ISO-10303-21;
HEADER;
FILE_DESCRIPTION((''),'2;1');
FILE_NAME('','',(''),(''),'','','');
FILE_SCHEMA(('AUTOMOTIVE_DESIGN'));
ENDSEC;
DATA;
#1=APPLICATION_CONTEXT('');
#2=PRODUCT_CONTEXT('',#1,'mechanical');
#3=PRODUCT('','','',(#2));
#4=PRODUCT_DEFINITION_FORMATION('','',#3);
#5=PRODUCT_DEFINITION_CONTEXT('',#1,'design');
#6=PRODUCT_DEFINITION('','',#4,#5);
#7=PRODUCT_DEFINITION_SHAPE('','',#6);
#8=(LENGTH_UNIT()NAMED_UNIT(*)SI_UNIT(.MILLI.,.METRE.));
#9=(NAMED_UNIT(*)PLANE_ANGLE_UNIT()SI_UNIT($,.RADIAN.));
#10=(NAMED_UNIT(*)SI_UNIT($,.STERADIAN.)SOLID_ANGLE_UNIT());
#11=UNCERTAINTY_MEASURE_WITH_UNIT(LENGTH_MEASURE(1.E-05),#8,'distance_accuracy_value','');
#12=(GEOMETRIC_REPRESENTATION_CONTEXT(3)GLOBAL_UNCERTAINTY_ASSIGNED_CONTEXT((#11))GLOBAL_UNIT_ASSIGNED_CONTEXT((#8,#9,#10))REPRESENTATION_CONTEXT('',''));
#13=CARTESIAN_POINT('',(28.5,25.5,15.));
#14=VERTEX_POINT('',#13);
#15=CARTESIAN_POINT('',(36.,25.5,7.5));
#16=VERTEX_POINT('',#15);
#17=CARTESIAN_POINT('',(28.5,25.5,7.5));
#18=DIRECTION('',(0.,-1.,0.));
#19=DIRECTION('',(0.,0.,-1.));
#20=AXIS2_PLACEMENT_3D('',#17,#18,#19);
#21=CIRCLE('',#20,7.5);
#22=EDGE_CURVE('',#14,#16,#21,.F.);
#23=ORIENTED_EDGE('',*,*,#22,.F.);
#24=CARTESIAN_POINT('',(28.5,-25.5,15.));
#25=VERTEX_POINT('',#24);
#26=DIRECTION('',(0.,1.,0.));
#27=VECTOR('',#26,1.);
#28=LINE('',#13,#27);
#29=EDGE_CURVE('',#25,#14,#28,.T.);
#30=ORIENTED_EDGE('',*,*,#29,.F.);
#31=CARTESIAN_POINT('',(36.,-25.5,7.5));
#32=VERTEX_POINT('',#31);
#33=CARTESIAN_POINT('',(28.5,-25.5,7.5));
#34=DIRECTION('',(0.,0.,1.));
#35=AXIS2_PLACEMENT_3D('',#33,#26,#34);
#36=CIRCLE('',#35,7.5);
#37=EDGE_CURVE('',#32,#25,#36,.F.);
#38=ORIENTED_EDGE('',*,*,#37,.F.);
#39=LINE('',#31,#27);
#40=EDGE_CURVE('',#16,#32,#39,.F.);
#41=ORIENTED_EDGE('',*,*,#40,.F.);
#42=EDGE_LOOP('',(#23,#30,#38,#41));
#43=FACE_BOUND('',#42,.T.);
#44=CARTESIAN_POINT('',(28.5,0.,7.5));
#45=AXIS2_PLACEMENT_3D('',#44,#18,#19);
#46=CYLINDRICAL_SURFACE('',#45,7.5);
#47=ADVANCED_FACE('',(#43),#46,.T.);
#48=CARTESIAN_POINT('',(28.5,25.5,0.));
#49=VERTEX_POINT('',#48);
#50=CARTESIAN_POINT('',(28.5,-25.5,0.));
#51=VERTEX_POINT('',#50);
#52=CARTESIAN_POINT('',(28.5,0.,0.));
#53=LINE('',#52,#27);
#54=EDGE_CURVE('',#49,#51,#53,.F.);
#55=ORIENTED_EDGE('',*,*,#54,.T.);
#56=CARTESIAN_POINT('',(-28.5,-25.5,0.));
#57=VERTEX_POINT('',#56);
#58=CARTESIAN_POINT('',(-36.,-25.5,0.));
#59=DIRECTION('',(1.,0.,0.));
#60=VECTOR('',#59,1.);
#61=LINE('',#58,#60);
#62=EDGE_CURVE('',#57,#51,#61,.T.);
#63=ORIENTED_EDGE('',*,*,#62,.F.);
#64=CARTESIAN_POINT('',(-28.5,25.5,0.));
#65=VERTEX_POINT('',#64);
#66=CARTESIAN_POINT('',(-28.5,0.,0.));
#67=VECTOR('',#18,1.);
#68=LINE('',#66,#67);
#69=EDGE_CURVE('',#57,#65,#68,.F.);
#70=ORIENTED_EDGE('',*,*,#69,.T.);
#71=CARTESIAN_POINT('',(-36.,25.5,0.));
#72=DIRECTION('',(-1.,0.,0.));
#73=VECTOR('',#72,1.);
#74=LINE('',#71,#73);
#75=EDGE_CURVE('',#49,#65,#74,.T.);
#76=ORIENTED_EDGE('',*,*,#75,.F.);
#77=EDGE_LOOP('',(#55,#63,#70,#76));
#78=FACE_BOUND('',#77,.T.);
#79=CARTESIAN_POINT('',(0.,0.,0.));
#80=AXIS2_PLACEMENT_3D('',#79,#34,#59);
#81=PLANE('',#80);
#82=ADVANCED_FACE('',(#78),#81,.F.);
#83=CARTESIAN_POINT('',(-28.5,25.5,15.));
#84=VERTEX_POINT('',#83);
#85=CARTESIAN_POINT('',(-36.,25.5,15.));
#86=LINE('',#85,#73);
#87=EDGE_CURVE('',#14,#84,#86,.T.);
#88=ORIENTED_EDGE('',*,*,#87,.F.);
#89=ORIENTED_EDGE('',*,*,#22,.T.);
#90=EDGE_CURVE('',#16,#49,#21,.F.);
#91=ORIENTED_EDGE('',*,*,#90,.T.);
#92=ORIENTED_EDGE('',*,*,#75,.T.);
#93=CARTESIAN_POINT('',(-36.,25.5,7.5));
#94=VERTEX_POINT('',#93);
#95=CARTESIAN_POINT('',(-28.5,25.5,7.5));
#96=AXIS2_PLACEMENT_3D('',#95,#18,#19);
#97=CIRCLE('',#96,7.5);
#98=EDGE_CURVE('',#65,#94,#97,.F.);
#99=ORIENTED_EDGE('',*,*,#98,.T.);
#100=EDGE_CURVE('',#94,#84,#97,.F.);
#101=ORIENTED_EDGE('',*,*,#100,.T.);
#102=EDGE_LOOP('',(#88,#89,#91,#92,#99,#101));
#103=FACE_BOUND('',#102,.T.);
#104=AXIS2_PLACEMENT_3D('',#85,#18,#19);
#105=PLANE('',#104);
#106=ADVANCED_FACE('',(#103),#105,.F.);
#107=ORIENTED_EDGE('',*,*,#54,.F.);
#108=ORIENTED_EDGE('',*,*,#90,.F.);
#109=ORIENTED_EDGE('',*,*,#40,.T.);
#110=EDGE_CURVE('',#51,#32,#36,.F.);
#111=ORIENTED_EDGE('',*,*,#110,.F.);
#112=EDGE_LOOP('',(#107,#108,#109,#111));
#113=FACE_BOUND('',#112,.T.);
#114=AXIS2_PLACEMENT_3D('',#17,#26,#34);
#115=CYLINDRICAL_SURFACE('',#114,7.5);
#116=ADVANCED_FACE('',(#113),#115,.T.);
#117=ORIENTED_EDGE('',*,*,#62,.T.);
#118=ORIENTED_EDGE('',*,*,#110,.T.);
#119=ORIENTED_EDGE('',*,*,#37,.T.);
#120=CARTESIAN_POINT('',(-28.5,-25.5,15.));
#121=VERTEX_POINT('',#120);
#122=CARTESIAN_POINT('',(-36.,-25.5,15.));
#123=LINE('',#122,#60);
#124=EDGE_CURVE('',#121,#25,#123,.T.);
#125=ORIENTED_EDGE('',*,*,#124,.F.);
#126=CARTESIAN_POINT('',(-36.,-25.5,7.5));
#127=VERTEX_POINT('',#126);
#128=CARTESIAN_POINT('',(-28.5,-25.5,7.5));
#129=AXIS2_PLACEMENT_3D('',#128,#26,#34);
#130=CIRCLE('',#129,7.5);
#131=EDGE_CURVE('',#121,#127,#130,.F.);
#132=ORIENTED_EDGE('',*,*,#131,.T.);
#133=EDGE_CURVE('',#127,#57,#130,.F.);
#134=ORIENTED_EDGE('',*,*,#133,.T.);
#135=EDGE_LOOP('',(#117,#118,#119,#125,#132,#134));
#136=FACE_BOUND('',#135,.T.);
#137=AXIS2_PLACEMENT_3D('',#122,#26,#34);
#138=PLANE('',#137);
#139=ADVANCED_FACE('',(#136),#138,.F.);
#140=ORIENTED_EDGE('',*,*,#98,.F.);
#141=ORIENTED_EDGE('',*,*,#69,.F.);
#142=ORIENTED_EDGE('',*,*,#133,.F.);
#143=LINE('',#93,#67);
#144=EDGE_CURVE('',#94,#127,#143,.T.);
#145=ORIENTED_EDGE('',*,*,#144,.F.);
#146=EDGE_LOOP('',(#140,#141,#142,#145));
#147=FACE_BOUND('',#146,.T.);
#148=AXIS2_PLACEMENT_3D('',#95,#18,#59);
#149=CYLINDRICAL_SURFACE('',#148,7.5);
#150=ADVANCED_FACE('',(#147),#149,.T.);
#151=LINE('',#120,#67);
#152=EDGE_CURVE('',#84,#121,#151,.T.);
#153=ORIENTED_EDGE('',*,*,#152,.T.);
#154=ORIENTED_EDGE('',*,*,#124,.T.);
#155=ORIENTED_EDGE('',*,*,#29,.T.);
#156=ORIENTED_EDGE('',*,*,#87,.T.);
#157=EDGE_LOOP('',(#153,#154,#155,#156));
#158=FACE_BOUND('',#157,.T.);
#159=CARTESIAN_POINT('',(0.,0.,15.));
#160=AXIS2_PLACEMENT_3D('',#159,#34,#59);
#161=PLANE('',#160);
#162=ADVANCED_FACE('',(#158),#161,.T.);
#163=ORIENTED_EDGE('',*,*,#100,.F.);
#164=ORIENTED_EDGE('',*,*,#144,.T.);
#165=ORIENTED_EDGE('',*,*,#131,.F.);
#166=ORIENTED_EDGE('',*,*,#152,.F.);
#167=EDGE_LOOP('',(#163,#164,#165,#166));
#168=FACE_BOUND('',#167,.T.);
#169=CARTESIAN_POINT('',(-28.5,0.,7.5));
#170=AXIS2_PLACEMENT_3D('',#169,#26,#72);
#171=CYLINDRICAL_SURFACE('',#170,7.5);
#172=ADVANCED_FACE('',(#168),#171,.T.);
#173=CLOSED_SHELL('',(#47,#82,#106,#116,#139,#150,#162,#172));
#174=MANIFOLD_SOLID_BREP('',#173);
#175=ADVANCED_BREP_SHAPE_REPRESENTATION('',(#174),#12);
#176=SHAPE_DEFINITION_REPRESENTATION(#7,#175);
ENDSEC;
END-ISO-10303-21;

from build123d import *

# Parameters (mm, degrees)
SKETCH1_W           = 72
SKETCH1_H           = 51
BOSS_EXTRUDE1_DEPTH = 15
FILLET2_R           = 7.5
FILLET3_R           = 7.5


with BuildPart() as part:
    # Sketch1 → Boss-Extrude1 (new body)
    with BuildSketch(Plane.XY):
        Rectangle(SKETCH1_W, SKETCH1_H)
    extrude(amount=BOSS_EXTRUDE1_DEPTH)

    # Fillet2
    fillet2_edges = [part.edges().sort_by_distance(p)[0] for p in [
        (36, 0, 15),
    ]]
    fillet(fillet2_edges, radius=FILLET2_R)

    # Fillet3
    fillet3_edges = [part.edges().sort_by_distance(p)[0] for p in [
        (-36, 0, 15),
        (-36, 0, 0),
        (36, 0, 0),
    ]]
    fillet(fillet3_edges, radius=FILLET3_R - 0.0001)  # a hair under: the kernel refuses the full size


solid = part.part
